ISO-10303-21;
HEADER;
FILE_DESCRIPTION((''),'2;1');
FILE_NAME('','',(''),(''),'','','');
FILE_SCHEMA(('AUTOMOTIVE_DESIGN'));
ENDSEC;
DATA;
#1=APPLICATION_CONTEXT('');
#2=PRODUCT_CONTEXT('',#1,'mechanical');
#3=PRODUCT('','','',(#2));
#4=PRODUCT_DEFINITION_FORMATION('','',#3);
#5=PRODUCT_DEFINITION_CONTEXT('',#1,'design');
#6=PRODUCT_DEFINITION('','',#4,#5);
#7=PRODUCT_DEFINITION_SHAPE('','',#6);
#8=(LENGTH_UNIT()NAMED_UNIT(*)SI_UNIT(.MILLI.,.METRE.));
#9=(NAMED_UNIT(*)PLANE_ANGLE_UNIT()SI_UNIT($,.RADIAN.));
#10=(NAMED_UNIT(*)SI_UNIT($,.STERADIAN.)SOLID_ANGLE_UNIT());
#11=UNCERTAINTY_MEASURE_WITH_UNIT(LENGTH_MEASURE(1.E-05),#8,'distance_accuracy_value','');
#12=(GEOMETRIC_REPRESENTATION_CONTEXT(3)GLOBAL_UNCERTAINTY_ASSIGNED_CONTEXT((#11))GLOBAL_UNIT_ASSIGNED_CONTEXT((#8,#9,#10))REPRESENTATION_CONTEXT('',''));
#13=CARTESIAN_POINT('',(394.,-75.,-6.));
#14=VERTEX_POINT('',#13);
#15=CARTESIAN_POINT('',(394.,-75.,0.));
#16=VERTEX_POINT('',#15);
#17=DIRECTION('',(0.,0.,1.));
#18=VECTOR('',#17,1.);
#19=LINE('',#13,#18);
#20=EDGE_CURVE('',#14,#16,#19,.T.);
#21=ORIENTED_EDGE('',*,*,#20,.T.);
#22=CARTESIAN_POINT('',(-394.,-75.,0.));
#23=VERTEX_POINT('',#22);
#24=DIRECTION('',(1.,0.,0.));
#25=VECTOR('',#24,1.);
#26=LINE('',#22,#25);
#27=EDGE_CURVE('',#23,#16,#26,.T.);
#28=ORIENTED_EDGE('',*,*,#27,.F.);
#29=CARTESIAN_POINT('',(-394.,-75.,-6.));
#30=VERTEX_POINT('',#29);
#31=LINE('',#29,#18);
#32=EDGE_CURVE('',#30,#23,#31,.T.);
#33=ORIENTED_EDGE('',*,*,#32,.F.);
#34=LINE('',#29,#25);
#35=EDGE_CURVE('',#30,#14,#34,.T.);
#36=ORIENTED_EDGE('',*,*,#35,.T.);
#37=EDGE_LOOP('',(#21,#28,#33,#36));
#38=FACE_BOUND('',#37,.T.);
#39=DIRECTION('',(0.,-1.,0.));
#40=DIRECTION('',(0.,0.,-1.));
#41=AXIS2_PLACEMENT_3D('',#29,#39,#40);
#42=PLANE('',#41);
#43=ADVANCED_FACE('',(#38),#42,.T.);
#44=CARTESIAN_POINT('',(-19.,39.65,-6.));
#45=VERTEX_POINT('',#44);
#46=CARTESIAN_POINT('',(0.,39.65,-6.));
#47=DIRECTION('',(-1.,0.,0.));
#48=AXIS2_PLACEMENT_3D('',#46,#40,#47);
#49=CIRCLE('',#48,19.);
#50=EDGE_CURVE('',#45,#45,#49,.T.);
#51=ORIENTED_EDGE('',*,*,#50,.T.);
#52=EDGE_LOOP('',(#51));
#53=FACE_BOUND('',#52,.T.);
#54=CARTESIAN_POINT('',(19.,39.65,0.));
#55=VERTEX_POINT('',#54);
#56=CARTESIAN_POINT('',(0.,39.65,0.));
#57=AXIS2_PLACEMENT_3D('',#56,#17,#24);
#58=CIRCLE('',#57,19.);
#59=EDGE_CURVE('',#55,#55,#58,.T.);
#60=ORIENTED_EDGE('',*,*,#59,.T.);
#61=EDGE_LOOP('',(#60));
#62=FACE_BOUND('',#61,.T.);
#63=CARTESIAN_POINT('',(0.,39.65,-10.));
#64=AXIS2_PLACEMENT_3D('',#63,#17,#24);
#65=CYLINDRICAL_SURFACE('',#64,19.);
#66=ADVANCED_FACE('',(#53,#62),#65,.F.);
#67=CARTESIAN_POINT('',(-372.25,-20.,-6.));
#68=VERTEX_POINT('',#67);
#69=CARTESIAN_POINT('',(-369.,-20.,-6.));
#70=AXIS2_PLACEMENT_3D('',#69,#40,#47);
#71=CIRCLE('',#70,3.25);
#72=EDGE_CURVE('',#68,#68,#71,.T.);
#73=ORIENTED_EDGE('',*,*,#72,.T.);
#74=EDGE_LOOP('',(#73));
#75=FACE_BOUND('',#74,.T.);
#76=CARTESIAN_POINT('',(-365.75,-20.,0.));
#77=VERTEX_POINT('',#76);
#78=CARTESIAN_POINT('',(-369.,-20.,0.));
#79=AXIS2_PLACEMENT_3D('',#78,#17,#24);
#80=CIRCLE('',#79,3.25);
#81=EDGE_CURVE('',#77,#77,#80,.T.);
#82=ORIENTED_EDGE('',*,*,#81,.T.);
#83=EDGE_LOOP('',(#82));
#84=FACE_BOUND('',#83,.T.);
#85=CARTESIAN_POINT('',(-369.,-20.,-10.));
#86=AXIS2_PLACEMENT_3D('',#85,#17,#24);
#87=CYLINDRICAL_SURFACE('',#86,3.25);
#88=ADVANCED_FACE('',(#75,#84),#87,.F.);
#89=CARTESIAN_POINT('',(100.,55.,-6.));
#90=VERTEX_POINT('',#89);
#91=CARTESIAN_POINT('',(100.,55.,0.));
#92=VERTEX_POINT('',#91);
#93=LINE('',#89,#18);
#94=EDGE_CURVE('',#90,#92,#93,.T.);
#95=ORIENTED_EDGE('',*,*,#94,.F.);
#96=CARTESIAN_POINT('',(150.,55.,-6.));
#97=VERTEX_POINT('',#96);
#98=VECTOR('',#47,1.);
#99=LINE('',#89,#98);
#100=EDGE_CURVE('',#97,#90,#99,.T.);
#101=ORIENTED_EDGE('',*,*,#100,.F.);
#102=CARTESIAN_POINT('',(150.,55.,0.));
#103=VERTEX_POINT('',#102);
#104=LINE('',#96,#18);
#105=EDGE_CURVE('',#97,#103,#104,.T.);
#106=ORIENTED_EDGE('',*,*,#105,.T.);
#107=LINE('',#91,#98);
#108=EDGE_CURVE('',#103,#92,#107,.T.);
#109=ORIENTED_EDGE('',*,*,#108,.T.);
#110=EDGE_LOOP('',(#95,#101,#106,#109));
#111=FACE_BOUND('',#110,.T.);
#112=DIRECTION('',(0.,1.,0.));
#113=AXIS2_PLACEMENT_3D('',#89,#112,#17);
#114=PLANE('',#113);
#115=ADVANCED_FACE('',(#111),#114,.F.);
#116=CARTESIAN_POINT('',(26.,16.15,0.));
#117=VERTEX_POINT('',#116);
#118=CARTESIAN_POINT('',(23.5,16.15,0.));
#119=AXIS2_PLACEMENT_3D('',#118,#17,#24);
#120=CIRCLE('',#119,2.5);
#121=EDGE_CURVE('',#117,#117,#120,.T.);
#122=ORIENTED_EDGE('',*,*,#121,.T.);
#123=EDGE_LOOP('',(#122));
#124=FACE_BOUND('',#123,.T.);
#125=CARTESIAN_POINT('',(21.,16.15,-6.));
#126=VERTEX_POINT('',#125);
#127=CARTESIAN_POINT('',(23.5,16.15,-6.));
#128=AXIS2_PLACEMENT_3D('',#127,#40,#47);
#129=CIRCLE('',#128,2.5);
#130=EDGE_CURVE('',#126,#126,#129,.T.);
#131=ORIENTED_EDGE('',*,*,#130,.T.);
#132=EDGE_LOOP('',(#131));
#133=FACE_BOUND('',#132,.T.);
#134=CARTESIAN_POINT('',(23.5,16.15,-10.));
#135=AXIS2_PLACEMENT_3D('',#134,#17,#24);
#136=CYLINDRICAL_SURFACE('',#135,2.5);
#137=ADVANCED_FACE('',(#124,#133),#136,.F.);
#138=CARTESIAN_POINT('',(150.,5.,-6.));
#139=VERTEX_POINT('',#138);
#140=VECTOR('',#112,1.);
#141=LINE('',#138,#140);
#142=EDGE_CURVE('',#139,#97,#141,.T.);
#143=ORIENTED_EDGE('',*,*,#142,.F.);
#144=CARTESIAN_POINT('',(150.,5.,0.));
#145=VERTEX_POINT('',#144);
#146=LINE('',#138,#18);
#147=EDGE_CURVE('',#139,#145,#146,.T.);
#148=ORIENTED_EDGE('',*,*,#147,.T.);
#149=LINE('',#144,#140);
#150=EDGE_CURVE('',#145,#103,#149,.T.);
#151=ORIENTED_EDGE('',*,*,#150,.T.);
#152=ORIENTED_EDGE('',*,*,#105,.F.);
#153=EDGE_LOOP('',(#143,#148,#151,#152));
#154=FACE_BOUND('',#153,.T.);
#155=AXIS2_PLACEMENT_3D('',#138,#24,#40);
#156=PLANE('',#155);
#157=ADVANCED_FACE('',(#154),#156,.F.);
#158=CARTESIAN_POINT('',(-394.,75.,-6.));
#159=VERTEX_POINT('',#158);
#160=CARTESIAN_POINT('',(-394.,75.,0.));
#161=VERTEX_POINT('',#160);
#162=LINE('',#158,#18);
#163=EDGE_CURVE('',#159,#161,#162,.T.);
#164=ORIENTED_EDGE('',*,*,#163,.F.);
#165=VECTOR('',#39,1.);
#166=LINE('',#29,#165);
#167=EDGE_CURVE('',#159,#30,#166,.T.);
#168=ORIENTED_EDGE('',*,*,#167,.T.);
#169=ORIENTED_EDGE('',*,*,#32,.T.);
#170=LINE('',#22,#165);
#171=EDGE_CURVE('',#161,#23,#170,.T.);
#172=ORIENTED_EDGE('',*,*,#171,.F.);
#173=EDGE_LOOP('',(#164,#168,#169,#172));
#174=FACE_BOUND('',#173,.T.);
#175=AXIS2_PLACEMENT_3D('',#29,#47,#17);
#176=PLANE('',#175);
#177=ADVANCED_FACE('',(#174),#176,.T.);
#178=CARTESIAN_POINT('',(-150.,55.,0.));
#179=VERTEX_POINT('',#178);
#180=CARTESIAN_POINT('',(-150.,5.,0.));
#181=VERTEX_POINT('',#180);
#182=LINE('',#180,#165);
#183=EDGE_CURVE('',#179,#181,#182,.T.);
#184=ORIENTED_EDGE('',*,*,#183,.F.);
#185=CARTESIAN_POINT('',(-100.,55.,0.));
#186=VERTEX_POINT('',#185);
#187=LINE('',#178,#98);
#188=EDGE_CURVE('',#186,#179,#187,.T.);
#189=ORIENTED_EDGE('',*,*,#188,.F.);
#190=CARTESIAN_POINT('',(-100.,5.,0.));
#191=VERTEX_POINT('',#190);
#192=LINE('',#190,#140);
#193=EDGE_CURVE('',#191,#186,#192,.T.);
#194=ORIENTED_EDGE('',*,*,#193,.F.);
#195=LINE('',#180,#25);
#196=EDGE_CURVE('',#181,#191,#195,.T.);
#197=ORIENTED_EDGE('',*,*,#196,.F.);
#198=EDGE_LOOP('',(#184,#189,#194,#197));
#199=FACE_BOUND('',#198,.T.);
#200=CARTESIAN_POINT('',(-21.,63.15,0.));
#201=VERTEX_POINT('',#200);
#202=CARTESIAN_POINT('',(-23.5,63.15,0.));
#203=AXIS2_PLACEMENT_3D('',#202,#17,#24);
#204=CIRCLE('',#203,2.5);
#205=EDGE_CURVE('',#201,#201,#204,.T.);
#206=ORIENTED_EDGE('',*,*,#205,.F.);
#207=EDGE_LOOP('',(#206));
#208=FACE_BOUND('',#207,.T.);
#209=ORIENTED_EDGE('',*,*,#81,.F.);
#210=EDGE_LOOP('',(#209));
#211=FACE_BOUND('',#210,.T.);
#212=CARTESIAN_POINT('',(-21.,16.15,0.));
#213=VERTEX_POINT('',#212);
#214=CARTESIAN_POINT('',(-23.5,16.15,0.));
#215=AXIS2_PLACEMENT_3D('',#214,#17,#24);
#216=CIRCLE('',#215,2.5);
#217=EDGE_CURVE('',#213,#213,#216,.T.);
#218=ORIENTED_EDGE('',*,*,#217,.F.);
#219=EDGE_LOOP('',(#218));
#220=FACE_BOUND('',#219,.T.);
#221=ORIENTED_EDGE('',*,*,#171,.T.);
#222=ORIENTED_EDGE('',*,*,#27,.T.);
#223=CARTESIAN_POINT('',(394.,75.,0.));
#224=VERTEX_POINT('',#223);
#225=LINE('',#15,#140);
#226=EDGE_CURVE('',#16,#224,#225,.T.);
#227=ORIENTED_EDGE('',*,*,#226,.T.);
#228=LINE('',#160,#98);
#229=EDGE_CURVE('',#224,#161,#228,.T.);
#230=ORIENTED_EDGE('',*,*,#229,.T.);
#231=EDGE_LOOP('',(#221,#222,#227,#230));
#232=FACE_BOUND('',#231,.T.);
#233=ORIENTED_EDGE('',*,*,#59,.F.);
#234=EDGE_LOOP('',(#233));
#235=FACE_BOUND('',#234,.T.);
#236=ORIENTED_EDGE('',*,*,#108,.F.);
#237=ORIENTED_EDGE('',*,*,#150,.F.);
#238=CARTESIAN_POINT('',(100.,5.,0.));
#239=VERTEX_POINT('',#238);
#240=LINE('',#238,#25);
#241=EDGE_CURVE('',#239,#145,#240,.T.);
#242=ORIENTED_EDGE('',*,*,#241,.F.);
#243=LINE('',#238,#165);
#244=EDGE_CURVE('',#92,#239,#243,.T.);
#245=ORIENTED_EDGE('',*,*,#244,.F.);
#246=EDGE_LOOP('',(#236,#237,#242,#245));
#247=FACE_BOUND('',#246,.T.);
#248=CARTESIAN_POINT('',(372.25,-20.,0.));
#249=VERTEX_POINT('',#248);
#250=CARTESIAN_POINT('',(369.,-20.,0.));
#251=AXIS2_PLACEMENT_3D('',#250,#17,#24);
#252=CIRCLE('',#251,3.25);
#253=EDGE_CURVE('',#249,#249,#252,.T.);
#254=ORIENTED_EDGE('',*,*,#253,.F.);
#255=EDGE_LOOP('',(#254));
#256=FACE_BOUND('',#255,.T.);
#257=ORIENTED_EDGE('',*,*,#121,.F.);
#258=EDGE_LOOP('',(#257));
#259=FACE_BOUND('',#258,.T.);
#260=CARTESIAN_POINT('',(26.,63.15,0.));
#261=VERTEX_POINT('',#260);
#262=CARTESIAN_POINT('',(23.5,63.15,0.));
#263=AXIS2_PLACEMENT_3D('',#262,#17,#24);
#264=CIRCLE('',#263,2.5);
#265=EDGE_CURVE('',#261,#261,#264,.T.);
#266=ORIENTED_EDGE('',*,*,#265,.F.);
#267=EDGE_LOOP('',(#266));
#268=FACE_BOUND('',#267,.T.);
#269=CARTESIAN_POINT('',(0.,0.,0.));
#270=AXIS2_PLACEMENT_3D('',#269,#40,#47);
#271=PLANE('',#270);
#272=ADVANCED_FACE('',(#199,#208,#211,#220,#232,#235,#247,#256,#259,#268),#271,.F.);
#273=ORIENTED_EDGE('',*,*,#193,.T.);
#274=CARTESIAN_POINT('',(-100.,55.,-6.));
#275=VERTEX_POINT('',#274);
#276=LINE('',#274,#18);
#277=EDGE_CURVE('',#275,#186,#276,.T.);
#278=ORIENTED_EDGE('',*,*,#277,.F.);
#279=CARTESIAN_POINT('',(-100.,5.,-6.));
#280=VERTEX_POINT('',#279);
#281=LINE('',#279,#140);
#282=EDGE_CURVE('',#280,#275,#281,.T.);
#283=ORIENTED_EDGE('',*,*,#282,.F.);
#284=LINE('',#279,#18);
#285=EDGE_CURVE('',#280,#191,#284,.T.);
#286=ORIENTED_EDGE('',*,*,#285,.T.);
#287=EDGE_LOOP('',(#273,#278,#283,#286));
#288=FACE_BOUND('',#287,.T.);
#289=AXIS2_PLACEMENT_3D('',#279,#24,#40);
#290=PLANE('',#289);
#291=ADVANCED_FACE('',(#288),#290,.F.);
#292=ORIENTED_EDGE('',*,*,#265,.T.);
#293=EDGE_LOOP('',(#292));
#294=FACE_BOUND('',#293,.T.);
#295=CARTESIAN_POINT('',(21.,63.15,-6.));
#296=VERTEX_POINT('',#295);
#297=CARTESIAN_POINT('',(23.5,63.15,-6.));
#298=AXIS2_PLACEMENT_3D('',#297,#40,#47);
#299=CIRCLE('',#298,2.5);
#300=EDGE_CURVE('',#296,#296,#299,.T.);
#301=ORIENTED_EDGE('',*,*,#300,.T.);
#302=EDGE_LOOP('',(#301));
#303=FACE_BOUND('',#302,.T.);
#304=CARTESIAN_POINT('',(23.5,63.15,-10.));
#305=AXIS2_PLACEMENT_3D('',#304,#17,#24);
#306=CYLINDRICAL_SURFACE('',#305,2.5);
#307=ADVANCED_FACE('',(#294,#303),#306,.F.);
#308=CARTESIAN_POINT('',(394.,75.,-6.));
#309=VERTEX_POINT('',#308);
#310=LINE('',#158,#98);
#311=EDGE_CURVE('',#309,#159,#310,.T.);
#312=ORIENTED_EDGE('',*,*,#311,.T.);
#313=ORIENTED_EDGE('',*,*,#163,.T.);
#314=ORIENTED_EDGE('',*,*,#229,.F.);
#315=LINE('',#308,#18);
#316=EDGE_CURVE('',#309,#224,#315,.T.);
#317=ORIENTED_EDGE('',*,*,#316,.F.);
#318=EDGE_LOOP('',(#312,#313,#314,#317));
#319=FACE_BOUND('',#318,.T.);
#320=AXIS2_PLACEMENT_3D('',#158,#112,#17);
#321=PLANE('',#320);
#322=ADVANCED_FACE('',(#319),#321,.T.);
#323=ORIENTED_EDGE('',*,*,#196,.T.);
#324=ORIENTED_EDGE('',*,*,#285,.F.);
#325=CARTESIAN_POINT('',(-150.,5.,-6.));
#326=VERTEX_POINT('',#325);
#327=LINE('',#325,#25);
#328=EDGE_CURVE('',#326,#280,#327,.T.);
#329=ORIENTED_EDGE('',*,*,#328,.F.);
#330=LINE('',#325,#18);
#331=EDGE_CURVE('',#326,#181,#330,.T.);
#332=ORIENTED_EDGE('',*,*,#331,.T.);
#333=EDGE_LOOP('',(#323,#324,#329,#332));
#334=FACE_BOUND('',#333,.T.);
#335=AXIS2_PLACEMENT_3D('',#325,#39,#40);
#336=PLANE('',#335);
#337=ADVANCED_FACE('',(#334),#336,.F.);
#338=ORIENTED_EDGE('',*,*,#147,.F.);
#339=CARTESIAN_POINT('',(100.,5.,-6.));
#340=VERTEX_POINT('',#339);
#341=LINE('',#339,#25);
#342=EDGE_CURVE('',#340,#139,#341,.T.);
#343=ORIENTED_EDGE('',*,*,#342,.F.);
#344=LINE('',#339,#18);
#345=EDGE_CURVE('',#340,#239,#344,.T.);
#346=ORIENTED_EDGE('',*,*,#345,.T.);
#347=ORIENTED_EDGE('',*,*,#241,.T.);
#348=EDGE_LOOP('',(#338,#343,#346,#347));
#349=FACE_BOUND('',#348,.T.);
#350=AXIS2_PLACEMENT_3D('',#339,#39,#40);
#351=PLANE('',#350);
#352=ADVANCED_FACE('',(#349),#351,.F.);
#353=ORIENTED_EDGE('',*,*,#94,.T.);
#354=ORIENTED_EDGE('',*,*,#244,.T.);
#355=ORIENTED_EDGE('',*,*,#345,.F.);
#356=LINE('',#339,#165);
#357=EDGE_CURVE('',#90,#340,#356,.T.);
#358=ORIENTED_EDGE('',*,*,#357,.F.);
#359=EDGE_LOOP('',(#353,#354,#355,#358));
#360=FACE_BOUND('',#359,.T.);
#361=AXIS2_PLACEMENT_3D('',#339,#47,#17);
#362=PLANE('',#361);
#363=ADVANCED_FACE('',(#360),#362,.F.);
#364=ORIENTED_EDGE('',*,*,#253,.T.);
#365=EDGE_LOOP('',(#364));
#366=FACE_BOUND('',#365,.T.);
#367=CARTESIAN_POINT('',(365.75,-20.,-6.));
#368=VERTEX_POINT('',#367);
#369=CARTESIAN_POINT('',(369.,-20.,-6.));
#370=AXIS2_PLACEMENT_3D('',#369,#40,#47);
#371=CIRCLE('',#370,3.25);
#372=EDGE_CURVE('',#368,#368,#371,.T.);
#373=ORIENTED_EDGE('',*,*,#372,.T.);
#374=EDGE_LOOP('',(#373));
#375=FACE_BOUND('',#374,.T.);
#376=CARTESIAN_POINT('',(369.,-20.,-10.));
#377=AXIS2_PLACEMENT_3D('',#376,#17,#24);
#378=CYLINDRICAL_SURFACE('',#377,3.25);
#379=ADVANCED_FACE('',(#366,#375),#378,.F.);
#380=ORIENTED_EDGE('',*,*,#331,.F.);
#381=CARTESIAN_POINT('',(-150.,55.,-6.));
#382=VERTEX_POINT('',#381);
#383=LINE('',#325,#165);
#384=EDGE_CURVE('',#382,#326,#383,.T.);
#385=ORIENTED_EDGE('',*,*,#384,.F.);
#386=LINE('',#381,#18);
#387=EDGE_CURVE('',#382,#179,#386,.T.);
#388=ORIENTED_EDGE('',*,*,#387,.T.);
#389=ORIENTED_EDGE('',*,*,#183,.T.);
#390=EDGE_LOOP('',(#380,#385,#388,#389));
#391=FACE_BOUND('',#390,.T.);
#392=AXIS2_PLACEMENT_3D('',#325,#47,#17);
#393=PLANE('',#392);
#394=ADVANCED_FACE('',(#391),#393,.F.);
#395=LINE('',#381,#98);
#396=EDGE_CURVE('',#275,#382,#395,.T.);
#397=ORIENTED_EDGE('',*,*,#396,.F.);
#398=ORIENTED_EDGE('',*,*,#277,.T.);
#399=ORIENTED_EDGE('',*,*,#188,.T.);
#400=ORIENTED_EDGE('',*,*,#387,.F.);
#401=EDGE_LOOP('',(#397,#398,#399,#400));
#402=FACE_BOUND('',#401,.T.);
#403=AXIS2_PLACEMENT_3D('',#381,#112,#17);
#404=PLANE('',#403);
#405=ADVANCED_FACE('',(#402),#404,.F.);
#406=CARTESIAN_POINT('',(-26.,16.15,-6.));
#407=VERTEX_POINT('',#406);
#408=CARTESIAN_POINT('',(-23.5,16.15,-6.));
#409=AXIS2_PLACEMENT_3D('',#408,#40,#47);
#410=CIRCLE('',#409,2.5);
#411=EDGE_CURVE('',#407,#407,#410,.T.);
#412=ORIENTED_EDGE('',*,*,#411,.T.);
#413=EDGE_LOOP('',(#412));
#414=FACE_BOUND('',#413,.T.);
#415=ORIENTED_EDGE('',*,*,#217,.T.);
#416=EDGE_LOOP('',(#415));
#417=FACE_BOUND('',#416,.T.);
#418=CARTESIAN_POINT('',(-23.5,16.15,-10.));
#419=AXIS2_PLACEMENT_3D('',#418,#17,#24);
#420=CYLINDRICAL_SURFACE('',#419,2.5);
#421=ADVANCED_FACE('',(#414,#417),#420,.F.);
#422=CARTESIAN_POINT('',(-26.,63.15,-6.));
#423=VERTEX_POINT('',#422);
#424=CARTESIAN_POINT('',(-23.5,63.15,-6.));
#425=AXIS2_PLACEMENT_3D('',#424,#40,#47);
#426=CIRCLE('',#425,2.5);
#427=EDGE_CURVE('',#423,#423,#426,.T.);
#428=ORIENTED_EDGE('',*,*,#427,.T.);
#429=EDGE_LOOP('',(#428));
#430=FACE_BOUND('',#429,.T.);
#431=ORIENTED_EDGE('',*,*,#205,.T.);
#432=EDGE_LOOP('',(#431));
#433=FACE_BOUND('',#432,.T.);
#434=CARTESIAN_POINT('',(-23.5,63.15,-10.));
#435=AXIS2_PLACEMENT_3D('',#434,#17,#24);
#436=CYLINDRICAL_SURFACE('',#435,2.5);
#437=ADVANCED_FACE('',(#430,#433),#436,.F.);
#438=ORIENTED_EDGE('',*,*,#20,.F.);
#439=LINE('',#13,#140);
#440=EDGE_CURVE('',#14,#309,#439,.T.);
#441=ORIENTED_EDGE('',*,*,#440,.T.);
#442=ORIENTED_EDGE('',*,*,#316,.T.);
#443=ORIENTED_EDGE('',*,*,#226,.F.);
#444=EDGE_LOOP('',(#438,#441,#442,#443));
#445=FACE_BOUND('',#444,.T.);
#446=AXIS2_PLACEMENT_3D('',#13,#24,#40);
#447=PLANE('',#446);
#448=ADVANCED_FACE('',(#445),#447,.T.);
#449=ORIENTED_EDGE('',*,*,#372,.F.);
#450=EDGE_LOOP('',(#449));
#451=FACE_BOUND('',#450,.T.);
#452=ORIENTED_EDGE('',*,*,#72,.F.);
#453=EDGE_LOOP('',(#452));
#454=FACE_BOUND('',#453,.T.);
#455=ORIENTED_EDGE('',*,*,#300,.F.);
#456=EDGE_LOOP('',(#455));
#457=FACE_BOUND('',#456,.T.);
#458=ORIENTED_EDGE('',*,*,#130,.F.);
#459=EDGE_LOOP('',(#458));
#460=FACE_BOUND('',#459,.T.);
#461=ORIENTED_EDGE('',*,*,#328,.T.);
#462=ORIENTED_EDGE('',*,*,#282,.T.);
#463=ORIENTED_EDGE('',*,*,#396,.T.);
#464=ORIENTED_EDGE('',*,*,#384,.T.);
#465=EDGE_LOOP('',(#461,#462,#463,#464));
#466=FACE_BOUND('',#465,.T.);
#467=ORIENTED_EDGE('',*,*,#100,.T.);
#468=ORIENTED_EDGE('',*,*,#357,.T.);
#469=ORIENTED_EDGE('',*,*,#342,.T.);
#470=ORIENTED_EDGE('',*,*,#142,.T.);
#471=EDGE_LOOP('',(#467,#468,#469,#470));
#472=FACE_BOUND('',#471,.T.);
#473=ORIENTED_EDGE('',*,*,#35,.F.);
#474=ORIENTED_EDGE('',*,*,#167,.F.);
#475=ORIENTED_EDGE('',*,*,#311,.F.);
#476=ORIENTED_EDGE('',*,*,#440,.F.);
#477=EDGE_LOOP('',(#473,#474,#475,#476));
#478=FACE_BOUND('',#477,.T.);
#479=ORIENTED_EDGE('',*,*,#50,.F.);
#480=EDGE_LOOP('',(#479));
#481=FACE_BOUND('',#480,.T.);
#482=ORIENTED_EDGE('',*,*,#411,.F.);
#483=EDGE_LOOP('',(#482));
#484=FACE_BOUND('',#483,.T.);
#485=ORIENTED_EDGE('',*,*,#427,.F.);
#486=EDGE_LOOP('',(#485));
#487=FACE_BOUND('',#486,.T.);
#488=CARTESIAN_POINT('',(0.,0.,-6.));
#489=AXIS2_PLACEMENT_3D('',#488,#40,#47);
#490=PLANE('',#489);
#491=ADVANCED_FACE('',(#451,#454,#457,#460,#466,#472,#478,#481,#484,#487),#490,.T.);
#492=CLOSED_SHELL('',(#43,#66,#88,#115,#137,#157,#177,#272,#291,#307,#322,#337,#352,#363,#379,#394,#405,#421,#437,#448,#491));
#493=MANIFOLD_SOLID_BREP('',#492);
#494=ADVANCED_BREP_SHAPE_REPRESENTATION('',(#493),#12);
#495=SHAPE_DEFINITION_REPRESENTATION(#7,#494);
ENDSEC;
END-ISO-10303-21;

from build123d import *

# Parameters (mm, degrees)
SKETCH1_W          = 788
SKETCH1_H          = 150
BASE_FLANGE1_DEPTH = 6
SKETCH2_W          = 50
SKETCH2_H          = 50
CUT_EXTRUDE1_DEPTH = 402.119682888
SKETCH3_R          = 19
SKETCH3_R_2        = 2.5
CUT_EXTRUDE2_DEPTH = 10
SKETCH4_R          = 3.25
CUT_EXTRUDE3_DEPTH = 10


# Sheet-metal steps are written as plain solids
with BuildPart() as part:
    # Sketch1 → Base-Flange1 (new body)
    with BuildSketch(Plane.XY):
        Rectangle(SKETCH1_W, SKETCH1_H)
    extrude(amount=-BASE_FLANGE1_DEPTH)

    # Sketch2 → Cut-Extrude1 (cut, through all)
    with BuildSketch(Plane.XY):
        with Locations((-125, 30)):
            Rectangle(SKETCH2_W, SKETCH2_H)
        with Locations((125, 30)):
            Rectangle(SKETCH2_W, SKETCH2_H)
    extrude(amount=-CUT_EXTRUDE1_DEPTH, mode=Mode.SUBTRACT)

    # Sketch3 → Cut-Extrude2 (cut)
    with BuildSketch(Plane.XY):
        with Locations((0, 39.65)):
            Circle(SKETCH3_R)
        with Locations((23.5, 63.15)):
            Circle(SKETCH3_R_2)
        with Locations((23.5, 16.15)):
            Circle(SKETCH3_R_2)
        with Locations((-23.5, 16.15)):
            Circle(SKETCH3_R_2)
        with Locations((-23.5, 63.15)):
            Circle(SKETCH3_R_2)
    extrude(amount=-CUT_EXTRUDE2_DEPTH, mode=Mode.SUBTRACT)

    # Sketch4 → Cut-Extrude3 (cut)
    with BuildSketch(Plane.XY):
        with Locations((369, -20)):
            Circle(SKETCH4_R)
        with Locations((-369, -20)):
            Circle(SKETCH4_R)
    extrude(amount=-CUT_EXTRUDE3_DEPTH, mode=Mode.SUBTRACT)


solid = part.part
